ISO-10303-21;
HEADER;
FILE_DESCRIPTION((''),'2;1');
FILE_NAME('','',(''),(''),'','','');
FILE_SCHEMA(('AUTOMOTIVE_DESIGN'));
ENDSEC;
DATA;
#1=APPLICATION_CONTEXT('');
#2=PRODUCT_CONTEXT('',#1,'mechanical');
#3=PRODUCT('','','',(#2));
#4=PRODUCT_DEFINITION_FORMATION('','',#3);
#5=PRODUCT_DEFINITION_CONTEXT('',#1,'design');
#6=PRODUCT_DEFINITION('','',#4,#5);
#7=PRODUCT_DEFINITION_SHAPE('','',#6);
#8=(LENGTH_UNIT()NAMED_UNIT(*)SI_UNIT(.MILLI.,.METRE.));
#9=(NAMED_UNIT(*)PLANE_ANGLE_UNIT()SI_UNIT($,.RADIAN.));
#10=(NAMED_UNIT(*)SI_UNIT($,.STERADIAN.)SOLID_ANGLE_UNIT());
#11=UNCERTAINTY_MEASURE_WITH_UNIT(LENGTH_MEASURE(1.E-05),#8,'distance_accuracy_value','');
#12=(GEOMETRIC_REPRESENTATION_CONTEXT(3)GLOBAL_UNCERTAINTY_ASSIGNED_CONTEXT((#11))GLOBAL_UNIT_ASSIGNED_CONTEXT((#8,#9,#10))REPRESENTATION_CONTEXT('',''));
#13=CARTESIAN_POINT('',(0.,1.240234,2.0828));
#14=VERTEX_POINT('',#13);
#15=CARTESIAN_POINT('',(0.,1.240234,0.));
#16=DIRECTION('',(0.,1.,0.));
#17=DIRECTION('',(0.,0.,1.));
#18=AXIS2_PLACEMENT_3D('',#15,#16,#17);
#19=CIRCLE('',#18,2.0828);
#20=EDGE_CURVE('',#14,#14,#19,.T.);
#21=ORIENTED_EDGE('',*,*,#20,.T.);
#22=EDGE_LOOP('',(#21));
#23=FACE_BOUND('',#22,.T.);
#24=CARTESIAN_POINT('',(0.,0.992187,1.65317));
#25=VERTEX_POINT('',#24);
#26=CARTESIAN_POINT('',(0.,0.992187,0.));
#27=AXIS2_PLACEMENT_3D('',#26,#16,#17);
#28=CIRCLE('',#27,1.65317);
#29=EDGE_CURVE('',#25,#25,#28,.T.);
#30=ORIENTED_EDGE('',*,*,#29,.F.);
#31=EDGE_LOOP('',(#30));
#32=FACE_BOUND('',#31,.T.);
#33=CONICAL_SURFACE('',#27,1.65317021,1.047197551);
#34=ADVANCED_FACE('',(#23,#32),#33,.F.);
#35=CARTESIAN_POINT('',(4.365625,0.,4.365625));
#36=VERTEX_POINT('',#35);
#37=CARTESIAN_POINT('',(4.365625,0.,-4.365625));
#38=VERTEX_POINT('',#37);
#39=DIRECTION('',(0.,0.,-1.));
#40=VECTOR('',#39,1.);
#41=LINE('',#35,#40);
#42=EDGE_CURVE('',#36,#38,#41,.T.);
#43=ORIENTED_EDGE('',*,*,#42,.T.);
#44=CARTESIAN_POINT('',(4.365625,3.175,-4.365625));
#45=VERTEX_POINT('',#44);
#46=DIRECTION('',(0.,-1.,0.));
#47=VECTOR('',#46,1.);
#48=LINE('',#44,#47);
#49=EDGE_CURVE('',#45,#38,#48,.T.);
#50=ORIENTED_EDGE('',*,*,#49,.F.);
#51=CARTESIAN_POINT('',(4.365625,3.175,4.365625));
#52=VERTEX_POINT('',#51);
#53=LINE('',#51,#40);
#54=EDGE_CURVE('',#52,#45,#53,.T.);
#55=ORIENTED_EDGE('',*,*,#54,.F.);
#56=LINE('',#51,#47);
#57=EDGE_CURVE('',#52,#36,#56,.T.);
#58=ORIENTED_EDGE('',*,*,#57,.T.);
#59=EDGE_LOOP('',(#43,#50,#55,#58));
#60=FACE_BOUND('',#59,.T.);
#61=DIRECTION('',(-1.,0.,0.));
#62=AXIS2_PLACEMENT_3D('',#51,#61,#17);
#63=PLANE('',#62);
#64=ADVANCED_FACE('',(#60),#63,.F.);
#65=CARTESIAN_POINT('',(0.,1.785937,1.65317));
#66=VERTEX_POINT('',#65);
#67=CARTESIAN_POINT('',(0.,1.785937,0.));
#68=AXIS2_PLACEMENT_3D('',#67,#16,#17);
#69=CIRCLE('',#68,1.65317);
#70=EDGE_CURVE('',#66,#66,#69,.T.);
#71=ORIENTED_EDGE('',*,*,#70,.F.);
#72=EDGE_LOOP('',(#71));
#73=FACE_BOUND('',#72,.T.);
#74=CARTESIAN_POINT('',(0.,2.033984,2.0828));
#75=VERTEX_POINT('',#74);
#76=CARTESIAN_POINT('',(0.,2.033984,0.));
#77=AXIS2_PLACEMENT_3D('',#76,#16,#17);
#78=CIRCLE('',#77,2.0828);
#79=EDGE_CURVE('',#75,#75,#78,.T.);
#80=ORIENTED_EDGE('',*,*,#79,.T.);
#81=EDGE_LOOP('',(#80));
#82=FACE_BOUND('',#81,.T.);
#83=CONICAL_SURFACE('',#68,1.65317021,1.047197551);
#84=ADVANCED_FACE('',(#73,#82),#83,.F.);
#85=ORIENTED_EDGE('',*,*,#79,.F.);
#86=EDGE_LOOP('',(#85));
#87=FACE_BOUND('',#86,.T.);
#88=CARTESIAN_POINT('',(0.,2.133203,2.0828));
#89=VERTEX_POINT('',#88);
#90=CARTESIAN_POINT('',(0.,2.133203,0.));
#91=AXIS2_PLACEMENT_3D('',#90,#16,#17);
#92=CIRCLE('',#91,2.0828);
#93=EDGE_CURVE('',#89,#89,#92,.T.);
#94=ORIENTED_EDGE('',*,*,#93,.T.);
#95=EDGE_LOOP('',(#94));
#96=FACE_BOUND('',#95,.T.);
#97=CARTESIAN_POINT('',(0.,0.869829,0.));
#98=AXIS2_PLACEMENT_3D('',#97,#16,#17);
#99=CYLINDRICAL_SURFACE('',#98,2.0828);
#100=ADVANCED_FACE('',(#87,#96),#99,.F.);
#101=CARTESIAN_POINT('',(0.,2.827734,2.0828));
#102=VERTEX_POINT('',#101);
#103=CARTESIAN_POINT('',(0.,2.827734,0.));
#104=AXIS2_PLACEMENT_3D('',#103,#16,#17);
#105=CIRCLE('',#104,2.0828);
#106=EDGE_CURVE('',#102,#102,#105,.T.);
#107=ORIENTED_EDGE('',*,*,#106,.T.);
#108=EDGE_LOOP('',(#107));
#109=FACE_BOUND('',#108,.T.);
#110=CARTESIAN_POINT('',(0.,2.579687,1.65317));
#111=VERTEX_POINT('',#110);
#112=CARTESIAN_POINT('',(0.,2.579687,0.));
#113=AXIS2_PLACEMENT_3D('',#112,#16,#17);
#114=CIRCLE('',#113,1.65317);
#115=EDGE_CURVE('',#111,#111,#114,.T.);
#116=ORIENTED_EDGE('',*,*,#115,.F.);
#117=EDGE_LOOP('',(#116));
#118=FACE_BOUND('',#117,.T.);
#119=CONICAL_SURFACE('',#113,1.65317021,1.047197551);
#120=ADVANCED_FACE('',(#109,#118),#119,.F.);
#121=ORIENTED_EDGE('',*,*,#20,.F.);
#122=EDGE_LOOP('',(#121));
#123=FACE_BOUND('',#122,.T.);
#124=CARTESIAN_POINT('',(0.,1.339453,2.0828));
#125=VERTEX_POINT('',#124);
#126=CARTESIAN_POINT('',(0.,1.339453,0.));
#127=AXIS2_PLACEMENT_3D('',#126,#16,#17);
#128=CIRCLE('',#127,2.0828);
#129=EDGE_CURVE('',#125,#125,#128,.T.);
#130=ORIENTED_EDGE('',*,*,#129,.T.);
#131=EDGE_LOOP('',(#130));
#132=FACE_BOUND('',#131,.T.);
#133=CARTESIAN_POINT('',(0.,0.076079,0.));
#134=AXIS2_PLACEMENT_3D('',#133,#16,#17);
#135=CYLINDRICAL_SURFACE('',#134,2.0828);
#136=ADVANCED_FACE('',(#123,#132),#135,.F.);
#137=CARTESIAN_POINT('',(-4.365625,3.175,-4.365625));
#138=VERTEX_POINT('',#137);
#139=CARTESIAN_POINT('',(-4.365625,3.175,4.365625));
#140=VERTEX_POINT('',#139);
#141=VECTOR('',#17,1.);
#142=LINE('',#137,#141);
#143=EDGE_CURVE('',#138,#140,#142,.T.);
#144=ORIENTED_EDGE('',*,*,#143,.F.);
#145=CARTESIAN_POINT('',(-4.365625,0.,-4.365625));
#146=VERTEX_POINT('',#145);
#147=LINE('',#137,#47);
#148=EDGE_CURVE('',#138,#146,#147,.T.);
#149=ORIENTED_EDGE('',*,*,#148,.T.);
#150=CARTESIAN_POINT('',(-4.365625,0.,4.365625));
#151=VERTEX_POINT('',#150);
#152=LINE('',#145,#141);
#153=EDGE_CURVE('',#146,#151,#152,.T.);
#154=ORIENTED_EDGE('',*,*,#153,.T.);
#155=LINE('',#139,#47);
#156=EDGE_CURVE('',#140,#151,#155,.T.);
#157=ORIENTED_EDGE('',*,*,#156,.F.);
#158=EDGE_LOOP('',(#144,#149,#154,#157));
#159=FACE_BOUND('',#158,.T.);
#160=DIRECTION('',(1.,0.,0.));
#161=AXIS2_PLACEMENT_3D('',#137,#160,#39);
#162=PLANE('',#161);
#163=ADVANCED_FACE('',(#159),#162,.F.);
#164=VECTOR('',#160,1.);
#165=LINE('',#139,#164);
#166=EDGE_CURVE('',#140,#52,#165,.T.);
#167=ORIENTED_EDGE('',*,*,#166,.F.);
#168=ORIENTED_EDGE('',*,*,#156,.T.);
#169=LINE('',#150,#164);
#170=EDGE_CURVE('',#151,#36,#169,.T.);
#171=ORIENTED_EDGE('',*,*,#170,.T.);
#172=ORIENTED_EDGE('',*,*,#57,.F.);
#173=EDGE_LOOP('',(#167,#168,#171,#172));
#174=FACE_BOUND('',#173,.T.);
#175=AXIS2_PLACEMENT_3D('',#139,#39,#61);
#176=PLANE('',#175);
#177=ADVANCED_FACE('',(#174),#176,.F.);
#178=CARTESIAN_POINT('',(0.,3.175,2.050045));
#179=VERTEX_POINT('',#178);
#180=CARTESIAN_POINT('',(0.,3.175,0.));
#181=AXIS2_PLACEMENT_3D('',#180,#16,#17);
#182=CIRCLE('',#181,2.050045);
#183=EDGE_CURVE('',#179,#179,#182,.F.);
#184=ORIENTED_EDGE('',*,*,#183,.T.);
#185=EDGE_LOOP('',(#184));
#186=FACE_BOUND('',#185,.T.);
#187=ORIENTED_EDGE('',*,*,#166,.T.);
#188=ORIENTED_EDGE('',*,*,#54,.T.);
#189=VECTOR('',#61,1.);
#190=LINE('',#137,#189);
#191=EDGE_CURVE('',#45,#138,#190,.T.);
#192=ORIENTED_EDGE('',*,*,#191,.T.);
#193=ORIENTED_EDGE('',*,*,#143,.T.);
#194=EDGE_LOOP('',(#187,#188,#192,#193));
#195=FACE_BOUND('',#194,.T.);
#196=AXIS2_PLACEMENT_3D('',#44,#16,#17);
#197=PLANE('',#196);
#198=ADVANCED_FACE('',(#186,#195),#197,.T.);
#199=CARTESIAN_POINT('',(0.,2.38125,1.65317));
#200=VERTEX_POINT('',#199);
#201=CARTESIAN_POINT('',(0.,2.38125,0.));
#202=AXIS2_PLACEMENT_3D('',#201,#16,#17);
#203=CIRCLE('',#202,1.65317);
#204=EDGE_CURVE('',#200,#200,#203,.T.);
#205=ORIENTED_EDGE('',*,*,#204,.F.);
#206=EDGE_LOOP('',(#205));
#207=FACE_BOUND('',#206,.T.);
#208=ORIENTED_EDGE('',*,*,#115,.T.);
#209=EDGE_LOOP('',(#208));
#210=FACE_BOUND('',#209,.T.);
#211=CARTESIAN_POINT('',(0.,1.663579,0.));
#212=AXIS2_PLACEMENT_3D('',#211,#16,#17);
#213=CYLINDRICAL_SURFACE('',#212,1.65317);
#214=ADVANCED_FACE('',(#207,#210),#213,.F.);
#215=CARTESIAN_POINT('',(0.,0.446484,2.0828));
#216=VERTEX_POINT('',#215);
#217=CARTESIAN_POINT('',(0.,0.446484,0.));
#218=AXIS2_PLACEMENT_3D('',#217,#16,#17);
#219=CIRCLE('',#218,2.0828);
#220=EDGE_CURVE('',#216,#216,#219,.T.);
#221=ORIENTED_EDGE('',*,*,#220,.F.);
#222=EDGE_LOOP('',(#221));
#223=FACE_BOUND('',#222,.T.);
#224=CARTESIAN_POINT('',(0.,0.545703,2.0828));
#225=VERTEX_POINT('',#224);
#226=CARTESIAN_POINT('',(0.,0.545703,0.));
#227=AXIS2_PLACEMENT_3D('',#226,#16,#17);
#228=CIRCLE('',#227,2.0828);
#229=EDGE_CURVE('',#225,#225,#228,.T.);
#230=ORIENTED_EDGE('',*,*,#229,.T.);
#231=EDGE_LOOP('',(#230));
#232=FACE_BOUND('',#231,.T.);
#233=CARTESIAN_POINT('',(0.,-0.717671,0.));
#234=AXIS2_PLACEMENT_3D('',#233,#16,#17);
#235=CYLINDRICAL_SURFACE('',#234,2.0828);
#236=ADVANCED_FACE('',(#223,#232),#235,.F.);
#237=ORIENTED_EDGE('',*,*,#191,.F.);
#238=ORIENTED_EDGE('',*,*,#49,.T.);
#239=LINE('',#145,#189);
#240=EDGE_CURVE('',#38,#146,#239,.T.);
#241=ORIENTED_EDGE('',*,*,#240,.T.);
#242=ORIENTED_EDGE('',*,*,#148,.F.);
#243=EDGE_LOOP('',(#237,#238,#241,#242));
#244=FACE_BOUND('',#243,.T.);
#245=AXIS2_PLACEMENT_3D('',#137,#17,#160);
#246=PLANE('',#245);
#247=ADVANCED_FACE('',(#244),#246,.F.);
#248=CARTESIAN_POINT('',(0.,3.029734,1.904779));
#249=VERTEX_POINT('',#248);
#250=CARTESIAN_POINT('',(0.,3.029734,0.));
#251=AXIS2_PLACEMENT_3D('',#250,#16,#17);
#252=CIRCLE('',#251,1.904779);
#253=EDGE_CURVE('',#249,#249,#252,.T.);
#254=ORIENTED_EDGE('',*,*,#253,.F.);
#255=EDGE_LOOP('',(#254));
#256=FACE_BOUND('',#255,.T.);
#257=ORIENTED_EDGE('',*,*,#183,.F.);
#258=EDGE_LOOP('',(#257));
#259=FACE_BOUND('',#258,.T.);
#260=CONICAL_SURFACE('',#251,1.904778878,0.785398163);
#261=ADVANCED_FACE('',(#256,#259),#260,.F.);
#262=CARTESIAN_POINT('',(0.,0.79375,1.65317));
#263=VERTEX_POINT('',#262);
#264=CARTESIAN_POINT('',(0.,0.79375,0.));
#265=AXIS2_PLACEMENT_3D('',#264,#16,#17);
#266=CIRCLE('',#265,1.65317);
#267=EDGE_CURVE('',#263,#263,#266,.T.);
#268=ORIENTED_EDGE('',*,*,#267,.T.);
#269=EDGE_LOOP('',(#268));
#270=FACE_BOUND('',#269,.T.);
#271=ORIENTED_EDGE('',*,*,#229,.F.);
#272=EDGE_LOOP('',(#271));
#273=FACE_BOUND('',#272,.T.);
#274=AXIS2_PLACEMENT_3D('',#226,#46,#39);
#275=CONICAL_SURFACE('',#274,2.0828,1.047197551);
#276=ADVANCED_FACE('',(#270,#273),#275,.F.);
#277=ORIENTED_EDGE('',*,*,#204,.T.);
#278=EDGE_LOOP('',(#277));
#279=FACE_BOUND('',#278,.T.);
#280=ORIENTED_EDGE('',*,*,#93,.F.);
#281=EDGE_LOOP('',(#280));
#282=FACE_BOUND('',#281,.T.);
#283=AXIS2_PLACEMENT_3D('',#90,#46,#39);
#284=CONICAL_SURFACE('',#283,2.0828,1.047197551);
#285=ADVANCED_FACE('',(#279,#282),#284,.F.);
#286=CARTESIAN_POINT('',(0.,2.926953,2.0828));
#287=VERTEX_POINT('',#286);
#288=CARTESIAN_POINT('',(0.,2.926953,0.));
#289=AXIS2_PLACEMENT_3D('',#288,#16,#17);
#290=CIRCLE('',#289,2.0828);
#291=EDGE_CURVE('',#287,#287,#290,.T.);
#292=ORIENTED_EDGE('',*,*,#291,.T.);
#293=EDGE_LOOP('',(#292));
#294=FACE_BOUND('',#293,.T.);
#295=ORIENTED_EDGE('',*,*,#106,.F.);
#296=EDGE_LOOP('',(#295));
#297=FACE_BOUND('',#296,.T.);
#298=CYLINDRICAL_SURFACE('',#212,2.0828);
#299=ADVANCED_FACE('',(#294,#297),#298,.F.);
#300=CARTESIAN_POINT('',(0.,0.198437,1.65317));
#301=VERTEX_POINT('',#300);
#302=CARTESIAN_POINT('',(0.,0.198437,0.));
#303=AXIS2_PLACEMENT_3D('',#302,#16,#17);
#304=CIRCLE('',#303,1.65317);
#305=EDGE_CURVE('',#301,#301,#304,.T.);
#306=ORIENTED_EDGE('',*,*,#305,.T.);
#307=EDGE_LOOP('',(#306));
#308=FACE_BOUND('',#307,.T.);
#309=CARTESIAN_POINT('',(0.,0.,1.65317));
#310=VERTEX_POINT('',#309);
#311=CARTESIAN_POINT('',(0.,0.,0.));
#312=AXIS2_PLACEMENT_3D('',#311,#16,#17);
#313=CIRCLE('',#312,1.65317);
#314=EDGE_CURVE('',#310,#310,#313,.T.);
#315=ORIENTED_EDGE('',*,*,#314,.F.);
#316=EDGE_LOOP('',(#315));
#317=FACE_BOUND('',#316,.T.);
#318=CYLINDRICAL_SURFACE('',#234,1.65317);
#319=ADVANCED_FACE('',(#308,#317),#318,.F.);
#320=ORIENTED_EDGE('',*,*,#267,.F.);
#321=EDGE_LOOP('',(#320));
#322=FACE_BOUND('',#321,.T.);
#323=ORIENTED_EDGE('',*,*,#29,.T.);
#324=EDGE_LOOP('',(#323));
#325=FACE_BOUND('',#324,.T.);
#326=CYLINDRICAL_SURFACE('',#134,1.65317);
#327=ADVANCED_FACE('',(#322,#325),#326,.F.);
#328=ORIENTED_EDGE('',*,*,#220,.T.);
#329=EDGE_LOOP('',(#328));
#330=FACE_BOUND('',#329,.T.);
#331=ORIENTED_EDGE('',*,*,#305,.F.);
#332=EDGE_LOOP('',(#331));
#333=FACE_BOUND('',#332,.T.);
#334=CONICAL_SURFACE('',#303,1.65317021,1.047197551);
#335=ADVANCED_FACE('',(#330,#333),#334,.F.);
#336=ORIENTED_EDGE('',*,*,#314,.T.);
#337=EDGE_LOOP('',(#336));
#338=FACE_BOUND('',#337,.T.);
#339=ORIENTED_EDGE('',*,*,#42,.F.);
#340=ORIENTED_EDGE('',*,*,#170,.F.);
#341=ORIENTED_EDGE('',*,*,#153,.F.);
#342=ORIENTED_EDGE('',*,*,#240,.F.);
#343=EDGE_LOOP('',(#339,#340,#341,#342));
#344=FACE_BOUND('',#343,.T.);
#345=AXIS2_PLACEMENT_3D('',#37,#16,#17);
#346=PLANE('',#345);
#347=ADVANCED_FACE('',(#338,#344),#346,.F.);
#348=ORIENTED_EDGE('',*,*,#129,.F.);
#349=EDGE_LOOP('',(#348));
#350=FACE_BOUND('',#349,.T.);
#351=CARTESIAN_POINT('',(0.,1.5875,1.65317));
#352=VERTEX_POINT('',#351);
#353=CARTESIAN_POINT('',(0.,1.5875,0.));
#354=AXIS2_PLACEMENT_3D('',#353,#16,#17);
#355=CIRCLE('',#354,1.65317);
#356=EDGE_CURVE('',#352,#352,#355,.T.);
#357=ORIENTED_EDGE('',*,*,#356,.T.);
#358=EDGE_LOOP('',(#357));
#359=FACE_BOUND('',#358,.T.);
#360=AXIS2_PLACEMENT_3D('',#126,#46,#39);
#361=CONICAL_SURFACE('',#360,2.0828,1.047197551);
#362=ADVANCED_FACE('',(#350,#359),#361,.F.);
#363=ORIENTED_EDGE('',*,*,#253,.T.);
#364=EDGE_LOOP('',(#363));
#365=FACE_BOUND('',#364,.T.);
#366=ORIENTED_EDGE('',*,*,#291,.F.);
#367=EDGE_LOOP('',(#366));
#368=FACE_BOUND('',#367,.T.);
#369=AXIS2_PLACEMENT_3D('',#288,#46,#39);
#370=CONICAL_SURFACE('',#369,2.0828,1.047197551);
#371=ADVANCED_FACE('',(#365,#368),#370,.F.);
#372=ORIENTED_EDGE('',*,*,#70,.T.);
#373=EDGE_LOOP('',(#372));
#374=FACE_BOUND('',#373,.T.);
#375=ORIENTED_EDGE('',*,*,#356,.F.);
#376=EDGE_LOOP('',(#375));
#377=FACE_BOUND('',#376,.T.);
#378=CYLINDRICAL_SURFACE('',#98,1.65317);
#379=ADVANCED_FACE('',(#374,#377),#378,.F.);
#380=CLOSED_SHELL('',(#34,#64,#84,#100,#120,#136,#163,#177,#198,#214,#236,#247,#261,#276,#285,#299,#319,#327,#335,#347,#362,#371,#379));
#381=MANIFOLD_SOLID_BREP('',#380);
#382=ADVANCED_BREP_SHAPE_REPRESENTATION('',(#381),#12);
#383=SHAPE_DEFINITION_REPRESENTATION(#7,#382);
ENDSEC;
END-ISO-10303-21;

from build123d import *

# Parameters (mm, degrees)
SKETCH1_W       = 8.73125
SKETCH1_H       = 8.73125
EXTRUDE1_DEPTH  = 3.175
LPATTERN2_COUNT = 5
LPATTERN2_PITCH = 0.79375
CHAMFER1_SIZE   = 0.396875
CHAMFER1_SIZE_2 = 0.290532664


with BuildPart() as part:
    # Sketch1 → Extrude1 (new body)
    with BuildSketch(Plane(origin=(0, 0, 0), x_dir=(1, 0, 0), z_dir=(0, 1, 0))):
        Rectangle(SKETCH1_W, SKETCH1_H)
    extrude(amount=EXTRUDE1_DEPTH)

    # Sketch2 → Cut-Revolve1 (revolve, cut)
    with BuildSketch(Plane.XY, mode=Mode.PRIVATE) as cut_revolve1_sk:
        Polygon((0, 3.175), (1.65317021, 3.175), (2.0828, 2.926953125), (2.0828, 2.827734375), (1.65317021, 2.5796875), (1.65317021, 2.38125), (0, 2.38125), align=None)
    cut_revolve1 = revolve(cut_revolve1_sk.sketch.rotate(Axis((0, 1.663578541, 0), (0, -1, 0)), 90), axis=Axis((0, 1.663578541, 0), (0, -1, 0)), mode=Mode.SUBTRACT)

    # LPattern2: Cut-Revolve1 ×5
    with Locations(*[(0, -i * LPATTERN2_PITCH, 0) for i in range(1, LPATTERN2_COUNT)]):
        add(cut_revolve1, mode=Mode.SUBTRACT)

    # Chamfer1
    # the kernel refuses this chamfer: 0.396875, 0.290532664 mm, written as the material it takes off along each edge
    with BuildSketch(Plane(origin=(0, 3.175, 0), x_dir=(0, 0, 1), z_dir=(1, 0, 0))) as chamfer1_piece_1:
        Polygon((1.65317021 + CHAMFER1_SIZE, 0), (1.65317021 + CHAMFER1_SIZE_2 * 0.866025404541, CHAMFER1_SIZE_2 * 0.500000000437), (1.65317021, 0), align=None)
    revolve(axis=Axis((0, 3.175, 0), (0, -1, 0)), mode=Mode.SUBTRACT)


solid = part.part
